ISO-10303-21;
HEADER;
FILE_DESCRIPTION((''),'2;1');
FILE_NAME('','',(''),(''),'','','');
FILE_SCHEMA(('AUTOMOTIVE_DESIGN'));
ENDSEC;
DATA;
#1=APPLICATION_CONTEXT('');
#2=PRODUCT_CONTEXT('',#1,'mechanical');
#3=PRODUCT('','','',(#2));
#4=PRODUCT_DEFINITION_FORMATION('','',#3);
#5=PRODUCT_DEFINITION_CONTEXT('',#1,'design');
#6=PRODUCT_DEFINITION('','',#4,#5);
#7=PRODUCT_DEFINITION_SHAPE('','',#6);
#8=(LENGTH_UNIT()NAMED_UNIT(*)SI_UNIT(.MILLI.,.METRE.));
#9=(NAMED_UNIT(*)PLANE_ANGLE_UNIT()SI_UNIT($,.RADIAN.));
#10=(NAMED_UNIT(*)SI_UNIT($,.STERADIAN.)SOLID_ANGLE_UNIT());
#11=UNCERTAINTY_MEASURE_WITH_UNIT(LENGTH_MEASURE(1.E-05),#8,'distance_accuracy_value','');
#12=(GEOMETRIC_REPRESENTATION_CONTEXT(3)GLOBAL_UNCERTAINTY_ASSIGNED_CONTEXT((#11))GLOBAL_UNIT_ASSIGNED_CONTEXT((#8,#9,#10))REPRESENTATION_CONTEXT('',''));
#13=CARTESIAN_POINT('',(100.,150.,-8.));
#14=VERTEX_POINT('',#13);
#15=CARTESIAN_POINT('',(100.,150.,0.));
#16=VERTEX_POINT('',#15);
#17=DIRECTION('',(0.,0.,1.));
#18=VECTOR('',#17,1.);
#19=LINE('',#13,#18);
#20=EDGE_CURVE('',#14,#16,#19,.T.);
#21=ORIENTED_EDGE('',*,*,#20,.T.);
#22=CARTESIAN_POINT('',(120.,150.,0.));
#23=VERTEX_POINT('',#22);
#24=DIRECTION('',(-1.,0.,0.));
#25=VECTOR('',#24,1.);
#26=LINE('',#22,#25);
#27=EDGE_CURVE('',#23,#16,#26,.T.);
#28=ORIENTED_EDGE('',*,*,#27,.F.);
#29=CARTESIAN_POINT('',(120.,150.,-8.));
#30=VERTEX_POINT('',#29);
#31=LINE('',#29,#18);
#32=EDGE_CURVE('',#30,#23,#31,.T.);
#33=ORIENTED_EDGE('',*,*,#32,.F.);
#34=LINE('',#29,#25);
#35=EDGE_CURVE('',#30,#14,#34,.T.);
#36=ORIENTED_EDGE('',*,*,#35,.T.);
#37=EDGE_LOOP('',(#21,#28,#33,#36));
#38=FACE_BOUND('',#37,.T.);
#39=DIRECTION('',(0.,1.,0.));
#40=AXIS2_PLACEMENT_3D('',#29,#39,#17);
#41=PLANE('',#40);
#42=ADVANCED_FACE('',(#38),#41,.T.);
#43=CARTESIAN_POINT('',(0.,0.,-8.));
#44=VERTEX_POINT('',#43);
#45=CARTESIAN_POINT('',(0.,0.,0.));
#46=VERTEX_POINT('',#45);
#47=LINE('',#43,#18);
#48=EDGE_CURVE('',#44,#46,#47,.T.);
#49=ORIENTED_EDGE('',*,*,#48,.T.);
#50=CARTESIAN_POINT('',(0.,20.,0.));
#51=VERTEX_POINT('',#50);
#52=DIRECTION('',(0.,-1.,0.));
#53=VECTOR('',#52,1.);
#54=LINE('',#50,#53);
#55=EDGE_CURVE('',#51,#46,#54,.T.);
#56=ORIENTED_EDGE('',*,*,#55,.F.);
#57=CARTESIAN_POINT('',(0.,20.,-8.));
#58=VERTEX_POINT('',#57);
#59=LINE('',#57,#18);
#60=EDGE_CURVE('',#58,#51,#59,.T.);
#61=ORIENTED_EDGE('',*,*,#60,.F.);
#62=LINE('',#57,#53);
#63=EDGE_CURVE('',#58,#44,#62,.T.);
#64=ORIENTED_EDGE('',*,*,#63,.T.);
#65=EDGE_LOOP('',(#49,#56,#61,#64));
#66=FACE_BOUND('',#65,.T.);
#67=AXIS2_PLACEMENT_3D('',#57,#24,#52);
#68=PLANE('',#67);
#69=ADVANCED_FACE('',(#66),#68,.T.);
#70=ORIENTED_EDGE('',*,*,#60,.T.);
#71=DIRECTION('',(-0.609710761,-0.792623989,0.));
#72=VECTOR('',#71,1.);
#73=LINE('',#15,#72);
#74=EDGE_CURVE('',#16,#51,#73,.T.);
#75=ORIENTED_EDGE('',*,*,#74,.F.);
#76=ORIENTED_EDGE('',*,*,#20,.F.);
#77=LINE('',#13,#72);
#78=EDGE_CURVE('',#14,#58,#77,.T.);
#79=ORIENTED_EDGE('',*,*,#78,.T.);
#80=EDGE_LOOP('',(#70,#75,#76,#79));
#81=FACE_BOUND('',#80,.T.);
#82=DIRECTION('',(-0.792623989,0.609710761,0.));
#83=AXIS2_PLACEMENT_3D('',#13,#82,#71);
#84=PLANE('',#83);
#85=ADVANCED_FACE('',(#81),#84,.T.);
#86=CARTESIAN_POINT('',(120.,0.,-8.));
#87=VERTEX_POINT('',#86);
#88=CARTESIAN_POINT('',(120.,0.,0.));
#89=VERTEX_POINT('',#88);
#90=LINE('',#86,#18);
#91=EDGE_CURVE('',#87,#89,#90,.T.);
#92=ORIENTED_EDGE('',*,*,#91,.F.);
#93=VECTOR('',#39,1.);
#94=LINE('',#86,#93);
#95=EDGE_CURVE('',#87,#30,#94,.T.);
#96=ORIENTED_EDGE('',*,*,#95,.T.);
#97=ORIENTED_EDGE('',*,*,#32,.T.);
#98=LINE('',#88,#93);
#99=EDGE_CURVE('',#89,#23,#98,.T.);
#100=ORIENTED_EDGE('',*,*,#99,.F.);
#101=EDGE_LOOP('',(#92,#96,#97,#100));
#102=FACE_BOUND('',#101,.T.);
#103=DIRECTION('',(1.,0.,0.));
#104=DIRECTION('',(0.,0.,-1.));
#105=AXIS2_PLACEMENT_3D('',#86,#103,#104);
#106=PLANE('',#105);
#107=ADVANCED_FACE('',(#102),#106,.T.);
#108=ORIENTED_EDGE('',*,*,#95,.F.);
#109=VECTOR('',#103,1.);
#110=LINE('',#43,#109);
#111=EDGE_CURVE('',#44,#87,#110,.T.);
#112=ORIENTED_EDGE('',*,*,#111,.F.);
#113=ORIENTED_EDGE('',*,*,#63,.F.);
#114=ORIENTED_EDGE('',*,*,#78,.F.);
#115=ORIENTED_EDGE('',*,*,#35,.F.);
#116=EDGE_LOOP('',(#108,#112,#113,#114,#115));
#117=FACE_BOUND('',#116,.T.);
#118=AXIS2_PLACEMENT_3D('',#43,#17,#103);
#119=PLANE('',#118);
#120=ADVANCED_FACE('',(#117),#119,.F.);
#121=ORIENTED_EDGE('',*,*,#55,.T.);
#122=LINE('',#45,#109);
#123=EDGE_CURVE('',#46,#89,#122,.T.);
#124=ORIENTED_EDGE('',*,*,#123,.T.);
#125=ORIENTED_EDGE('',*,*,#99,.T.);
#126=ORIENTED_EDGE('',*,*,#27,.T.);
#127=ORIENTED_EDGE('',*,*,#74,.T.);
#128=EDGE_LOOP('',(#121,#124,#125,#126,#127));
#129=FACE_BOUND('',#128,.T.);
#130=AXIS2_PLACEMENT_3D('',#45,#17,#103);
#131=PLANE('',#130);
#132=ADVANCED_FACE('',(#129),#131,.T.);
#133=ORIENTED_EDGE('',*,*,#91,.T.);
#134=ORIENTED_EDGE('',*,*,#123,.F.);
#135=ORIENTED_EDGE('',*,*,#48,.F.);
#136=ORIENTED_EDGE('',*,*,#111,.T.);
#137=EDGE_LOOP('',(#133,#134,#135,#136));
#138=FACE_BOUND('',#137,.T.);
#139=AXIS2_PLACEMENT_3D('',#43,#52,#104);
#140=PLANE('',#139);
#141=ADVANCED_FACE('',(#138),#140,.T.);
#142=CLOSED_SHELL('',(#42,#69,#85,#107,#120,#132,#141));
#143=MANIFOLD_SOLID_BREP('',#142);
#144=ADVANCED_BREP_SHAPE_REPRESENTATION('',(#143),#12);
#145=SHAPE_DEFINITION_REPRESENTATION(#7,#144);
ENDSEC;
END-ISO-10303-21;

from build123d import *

# Parameters (mm, degrees)
SM_BASE_FLANGE_1_DEPTH = 8


# Sheet-metal steps are written as plain solids
with BuildPart() as part:
    # Sketch 1 → Базовая кромка1 (new body)
    with BuildSketch(Plane.XY):
        Polygon((100, 150), (0, 20), (0, 0), (120, 0), (120, 150), align=None)
    extrude(amount=-SM_BASE_FLANGE_1_DEPTH)


solid = part.part
